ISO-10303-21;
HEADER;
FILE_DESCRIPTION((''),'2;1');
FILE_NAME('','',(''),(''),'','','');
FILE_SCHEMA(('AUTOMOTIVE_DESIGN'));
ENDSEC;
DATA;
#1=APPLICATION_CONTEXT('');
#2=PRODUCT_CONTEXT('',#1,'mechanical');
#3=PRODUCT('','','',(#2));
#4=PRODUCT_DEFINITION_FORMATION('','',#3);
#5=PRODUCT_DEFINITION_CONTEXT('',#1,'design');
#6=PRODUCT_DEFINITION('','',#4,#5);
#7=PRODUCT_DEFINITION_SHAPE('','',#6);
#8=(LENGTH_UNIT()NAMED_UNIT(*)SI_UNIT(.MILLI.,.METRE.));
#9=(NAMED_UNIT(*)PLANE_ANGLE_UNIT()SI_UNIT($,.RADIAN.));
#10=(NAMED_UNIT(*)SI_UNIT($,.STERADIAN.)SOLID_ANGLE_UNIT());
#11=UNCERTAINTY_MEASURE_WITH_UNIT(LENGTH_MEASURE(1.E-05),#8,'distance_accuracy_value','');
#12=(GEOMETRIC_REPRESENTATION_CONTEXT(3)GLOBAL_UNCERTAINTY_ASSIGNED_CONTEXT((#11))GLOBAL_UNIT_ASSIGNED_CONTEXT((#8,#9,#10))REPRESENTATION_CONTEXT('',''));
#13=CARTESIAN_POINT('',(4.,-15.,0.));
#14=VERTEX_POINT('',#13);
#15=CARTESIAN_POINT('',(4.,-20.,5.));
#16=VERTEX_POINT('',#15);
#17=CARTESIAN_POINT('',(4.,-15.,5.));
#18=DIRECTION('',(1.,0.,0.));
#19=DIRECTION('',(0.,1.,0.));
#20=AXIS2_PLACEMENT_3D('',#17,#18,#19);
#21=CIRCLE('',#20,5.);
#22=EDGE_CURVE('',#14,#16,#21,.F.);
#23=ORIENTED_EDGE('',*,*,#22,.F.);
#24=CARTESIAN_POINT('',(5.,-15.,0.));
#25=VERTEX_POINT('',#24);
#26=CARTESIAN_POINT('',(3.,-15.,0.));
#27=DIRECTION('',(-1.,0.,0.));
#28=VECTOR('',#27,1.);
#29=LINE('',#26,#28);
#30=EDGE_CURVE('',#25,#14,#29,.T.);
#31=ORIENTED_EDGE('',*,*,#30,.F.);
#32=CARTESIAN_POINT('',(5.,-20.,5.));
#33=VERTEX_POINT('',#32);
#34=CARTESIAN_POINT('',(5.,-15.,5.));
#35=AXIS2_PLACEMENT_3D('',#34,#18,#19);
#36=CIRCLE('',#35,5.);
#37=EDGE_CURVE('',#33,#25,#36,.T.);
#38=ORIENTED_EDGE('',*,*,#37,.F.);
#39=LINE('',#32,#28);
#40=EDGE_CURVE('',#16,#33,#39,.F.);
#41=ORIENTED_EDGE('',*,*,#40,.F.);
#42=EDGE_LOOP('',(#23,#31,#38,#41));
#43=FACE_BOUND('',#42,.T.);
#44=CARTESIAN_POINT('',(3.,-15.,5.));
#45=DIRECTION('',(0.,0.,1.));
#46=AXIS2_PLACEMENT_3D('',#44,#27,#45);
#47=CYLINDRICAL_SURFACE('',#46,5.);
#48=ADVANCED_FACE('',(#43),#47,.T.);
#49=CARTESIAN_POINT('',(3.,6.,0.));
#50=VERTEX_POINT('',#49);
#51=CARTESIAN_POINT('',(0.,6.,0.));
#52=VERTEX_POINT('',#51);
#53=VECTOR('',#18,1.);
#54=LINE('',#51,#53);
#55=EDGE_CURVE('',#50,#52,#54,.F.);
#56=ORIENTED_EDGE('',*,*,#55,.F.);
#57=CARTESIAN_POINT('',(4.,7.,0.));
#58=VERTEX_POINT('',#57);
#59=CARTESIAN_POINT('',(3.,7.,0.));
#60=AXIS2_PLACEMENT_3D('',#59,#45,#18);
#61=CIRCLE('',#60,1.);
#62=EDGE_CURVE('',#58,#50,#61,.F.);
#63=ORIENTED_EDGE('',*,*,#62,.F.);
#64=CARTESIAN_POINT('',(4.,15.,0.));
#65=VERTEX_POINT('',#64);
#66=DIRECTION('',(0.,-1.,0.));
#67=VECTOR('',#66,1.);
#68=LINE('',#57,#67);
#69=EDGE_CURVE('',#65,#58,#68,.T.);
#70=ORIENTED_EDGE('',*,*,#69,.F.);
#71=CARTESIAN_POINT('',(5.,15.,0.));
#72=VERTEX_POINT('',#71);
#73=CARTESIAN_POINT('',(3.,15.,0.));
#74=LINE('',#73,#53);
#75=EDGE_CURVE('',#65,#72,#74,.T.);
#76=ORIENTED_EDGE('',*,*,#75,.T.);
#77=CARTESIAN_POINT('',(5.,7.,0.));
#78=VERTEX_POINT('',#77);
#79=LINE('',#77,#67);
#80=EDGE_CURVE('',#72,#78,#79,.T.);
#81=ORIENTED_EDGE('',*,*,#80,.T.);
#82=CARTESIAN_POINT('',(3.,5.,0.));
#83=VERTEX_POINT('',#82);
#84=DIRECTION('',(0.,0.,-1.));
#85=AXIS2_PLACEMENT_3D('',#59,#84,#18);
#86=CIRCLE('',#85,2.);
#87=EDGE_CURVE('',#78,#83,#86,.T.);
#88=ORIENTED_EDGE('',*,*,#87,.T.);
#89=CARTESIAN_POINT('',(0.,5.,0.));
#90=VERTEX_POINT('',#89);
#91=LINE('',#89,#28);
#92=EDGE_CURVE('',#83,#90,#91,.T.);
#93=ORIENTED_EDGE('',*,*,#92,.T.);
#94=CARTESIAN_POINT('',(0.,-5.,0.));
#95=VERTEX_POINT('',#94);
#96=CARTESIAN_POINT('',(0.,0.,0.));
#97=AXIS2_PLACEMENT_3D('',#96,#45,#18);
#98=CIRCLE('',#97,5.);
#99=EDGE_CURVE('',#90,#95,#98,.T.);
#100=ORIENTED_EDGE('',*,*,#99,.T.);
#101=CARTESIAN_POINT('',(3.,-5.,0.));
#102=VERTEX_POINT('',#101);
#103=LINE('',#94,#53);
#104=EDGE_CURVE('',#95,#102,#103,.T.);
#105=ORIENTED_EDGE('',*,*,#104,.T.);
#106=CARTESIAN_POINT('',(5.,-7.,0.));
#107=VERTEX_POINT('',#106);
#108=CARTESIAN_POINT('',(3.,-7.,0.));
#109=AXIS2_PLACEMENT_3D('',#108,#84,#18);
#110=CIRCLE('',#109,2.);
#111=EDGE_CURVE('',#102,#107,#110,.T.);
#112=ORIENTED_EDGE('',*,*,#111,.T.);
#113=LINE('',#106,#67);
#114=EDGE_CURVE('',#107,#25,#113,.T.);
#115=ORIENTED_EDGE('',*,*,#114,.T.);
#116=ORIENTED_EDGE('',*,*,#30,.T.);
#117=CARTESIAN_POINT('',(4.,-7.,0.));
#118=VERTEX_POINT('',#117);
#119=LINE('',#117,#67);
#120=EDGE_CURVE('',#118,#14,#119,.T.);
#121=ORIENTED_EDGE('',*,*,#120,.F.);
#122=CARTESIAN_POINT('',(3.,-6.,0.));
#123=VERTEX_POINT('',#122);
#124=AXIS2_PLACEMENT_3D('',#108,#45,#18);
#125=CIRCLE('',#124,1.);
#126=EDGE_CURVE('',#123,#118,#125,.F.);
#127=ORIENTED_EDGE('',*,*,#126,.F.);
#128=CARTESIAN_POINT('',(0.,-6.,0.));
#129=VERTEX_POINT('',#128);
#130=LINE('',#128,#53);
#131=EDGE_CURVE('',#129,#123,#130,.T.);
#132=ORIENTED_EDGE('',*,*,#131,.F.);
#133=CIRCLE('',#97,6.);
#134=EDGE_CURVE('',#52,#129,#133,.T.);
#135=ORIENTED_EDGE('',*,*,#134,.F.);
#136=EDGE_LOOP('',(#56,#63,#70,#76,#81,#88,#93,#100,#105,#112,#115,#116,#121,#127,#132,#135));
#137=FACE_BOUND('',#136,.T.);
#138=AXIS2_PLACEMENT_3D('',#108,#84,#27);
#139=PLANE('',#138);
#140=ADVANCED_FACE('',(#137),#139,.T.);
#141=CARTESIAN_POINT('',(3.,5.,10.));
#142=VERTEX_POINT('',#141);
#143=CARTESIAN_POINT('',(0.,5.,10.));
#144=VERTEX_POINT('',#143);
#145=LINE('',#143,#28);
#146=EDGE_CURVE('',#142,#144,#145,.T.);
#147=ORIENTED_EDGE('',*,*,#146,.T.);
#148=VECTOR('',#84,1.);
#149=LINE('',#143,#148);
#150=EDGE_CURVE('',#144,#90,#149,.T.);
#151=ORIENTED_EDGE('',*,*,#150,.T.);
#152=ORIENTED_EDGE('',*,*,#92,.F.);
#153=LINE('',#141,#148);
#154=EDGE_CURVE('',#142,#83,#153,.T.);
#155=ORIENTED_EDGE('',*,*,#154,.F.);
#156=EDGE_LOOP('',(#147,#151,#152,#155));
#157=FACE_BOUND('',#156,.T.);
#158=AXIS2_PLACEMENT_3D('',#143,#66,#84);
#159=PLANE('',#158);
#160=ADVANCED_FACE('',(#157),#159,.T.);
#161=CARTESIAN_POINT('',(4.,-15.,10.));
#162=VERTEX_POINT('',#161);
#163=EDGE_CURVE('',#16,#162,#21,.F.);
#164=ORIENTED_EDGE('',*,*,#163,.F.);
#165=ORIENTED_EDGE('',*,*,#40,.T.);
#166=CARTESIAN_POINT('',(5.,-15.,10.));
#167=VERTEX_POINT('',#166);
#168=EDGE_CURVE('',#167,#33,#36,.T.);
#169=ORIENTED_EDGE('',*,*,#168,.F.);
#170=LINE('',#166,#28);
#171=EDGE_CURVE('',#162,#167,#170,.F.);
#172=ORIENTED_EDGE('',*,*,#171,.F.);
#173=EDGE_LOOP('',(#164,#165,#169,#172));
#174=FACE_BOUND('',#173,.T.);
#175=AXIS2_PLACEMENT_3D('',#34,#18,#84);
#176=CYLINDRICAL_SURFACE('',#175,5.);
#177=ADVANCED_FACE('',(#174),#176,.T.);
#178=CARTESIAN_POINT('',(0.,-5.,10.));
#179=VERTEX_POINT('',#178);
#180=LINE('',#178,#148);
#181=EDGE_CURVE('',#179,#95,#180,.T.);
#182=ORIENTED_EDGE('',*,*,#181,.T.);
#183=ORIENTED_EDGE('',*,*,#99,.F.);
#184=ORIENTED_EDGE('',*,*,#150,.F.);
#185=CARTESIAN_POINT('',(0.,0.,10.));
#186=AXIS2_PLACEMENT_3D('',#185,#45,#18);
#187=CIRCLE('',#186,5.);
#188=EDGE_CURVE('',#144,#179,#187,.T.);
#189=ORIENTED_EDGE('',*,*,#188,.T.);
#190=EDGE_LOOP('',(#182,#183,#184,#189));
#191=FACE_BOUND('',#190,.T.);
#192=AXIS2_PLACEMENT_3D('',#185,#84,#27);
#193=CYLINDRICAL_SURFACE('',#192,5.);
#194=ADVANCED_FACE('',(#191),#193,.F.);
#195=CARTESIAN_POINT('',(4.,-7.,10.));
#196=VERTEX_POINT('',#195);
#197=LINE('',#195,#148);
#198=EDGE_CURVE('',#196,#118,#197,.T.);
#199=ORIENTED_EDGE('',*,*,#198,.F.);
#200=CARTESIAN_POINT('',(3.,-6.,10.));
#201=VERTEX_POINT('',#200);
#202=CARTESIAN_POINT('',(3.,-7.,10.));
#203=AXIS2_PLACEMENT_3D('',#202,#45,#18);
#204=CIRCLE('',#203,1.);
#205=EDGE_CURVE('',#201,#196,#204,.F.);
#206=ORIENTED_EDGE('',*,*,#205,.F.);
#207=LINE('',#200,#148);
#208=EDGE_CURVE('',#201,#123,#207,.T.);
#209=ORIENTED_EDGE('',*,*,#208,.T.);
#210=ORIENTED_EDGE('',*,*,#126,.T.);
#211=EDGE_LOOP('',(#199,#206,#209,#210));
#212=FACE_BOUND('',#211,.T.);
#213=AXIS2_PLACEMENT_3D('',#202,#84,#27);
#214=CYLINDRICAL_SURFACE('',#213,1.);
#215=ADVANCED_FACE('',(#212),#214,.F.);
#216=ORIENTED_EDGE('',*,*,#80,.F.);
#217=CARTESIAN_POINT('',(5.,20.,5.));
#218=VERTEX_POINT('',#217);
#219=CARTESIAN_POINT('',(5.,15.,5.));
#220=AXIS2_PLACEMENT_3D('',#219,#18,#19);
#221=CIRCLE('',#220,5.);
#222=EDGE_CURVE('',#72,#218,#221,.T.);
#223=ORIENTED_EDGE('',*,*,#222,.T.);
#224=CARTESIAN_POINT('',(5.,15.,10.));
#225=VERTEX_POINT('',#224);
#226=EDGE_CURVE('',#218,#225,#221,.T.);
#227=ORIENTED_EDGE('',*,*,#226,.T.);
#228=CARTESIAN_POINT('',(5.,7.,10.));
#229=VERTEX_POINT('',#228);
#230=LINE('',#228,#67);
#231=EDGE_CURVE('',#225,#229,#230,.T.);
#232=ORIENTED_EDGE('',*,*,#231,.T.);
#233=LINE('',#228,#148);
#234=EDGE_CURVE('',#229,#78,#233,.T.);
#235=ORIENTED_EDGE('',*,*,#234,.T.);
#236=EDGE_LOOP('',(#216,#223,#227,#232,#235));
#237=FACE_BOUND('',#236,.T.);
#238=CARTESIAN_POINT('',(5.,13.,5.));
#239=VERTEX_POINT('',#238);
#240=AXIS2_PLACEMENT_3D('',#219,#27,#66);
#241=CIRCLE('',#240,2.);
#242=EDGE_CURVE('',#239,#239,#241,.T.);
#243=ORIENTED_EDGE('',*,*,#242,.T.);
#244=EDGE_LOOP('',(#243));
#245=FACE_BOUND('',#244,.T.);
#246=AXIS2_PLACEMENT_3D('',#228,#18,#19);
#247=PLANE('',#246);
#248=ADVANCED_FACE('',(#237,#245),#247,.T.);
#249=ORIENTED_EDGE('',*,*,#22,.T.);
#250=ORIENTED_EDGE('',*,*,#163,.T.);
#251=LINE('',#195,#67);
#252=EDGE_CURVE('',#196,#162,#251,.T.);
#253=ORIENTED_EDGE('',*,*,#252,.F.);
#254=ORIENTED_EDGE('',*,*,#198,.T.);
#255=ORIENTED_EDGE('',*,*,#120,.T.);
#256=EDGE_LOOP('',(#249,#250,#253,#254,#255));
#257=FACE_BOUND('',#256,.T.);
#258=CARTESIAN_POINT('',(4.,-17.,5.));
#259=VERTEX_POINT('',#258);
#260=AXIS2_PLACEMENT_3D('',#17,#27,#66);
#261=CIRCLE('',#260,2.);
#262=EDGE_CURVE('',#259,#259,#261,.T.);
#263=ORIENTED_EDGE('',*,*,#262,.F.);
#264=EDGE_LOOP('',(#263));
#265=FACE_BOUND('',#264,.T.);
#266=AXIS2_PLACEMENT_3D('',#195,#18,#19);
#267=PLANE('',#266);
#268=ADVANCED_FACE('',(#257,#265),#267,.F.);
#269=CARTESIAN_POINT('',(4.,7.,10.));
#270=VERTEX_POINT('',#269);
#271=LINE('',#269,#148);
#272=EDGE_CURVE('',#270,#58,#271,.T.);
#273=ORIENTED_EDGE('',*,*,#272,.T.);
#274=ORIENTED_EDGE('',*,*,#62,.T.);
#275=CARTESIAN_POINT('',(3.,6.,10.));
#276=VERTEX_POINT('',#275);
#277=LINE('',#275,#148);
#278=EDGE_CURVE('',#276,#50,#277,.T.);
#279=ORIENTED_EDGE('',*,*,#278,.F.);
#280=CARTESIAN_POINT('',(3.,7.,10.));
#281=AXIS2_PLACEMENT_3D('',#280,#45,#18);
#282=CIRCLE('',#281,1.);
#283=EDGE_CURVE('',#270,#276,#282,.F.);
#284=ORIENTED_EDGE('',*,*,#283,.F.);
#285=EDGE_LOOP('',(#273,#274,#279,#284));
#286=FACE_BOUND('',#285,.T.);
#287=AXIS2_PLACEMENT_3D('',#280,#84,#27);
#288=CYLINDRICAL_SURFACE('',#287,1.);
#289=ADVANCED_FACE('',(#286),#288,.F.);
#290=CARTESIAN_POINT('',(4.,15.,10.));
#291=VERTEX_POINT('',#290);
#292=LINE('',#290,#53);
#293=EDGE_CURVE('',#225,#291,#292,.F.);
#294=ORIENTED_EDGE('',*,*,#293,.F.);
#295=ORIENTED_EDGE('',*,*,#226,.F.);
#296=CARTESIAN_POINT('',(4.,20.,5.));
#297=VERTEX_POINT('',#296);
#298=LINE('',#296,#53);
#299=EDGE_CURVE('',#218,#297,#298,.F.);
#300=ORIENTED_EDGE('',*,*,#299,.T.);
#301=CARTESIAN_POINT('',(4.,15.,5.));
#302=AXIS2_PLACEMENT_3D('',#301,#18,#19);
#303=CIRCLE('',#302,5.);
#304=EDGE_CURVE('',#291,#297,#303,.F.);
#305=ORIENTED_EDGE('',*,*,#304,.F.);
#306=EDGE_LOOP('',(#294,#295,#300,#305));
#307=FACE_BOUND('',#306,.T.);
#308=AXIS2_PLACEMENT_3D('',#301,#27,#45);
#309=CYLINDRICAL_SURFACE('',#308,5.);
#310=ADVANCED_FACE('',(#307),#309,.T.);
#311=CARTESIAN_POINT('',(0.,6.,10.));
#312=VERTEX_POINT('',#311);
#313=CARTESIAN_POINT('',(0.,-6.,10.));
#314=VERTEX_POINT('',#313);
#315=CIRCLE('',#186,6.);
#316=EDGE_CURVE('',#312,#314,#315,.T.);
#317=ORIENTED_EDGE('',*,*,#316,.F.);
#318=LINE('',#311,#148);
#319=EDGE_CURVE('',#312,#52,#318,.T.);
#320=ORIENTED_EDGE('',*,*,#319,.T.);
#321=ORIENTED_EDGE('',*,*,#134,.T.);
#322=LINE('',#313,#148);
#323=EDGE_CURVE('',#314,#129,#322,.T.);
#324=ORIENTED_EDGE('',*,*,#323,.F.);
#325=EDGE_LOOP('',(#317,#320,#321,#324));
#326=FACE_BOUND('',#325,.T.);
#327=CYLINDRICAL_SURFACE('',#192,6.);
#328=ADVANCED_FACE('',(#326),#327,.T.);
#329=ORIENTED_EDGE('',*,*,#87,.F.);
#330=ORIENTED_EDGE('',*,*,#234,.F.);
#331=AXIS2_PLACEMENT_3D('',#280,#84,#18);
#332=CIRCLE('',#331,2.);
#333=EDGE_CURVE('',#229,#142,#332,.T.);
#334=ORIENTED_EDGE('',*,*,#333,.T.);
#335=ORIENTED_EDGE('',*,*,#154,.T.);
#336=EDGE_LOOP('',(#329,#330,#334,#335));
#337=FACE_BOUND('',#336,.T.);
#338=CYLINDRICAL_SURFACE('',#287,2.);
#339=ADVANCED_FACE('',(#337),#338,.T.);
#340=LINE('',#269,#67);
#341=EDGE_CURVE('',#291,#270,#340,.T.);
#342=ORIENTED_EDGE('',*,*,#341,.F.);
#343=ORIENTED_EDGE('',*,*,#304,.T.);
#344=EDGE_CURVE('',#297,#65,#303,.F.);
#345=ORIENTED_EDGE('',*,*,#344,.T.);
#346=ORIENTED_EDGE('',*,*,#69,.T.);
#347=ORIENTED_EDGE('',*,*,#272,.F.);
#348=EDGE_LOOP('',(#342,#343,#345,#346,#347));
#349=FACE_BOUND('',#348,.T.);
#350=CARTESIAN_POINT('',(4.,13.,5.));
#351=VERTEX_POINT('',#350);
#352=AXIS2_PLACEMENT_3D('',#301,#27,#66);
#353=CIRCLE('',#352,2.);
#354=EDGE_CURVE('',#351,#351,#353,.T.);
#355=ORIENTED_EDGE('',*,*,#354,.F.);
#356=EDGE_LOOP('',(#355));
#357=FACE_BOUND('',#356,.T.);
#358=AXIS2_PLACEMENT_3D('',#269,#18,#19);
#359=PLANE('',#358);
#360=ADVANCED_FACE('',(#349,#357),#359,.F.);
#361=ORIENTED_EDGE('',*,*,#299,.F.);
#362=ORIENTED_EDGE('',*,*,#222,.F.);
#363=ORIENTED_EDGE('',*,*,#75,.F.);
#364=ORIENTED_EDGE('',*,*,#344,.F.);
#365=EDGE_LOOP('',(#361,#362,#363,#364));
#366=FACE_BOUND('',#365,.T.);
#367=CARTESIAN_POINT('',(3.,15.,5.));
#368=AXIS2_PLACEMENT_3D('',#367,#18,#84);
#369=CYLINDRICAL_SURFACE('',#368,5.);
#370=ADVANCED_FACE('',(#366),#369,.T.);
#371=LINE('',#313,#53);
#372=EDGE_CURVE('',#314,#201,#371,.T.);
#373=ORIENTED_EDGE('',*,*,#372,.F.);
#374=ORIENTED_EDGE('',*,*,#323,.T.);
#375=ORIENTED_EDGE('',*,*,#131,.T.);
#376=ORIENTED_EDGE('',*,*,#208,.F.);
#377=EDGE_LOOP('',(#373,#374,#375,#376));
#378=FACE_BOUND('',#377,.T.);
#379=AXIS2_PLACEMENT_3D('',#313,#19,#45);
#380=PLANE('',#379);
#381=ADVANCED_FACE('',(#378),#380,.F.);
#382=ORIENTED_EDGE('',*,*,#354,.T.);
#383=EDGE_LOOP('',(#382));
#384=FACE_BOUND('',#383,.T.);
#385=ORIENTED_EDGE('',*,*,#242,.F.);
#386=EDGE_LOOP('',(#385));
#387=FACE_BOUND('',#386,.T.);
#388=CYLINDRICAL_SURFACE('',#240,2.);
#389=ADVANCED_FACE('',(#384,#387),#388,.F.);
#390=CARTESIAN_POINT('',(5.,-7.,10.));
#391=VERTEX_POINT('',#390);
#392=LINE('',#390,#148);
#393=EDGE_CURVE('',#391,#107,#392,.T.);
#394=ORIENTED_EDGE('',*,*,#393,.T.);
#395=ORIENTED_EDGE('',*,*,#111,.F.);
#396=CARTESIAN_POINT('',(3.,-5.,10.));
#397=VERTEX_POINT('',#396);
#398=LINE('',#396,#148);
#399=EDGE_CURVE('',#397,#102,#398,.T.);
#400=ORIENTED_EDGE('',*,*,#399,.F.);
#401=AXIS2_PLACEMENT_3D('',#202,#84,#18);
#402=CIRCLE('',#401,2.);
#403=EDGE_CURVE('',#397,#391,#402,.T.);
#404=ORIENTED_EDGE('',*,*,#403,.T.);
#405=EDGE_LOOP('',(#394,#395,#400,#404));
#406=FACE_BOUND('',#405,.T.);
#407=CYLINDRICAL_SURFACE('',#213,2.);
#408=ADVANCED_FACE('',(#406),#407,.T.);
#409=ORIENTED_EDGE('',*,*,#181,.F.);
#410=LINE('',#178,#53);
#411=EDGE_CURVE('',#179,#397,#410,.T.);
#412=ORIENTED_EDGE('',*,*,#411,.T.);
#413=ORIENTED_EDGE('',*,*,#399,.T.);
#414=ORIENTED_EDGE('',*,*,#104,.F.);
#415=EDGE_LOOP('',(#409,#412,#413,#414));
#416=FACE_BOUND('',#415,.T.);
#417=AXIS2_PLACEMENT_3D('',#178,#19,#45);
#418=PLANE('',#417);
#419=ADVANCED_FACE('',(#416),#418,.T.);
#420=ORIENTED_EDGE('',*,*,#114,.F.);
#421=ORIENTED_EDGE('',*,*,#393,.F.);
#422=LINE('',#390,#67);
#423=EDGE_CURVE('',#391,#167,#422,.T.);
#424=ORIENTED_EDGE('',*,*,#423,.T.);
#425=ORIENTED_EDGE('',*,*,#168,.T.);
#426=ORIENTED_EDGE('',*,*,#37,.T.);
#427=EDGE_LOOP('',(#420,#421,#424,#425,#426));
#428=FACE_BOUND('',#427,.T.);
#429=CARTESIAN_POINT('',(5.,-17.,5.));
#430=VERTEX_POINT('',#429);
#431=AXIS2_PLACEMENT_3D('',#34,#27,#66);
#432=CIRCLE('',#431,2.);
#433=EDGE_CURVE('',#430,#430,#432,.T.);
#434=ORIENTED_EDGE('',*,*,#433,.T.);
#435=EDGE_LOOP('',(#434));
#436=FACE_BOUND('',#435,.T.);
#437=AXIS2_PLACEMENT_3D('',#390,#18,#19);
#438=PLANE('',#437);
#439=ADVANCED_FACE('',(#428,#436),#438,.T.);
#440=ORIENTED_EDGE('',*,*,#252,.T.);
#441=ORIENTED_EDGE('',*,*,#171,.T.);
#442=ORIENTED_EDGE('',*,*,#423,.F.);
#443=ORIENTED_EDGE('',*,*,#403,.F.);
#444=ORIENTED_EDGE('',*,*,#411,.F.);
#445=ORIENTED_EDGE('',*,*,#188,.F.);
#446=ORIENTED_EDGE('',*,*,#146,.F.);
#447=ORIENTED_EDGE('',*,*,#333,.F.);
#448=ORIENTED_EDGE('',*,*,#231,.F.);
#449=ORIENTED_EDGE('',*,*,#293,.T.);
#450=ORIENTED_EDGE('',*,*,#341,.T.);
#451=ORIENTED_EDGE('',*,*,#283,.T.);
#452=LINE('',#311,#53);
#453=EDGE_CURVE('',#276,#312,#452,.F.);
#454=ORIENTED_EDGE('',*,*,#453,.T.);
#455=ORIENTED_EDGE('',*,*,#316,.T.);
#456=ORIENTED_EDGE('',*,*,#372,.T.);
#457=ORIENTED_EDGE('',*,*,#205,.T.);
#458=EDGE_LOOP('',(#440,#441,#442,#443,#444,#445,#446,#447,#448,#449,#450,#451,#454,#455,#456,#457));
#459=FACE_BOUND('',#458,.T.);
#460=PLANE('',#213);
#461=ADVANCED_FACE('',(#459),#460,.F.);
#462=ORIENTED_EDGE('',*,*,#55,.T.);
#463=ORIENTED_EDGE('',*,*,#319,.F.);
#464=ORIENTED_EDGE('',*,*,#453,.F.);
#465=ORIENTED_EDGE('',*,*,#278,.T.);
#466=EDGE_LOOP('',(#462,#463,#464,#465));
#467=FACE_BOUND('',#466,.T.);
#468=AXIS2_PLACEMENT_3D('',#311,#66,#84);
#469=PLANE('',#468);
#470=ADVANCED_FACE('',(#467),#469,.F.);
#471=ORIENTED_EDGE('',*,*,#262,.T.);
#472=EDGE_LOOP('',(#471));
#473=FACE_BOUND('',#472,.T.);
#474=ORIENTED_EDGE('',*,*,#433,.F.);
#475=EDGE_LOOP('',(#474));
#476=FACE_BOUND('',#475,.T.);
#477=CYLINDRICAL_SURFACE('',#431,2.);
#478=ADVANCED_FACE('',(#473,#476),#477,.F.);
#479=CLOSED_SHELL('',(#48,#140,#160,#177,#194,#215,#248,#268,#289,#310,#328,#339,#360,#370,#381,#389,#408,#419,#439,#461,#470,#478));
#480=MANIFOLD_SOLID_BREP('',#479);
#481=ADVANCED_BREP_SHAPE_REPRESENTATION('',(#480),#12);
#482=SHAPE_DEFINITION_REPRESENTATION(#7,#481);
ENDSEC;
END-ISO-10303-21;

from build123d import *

# Parameters (mm, degrees)
EXTRUDE_1_DEPTH     = 10
FILLET_1_R          = 5
SKETCH_2_R          = 2
CUT_EXTRUDE_1_DEPTH = 25.494897428


with BuildPart() as part:
    # 草图1 → 拉伸-薄壁1 (new body)
    with BuildSketch(Plane.XY):
        with BuildLine():
            Line((5, 20), (5, 7))
            ThreePointArc((5, 7), (4.414213562, 5.585786438), (3, 5))
            Line((3, 5), (0, 5))
            ThreePointArc((0, 5), (-5, 0), (0, -5))
            Line((0, -5), (3, -5))
            ThreePointArc((3, -5), (4.414213562, -5.585786438), (5, -7))
            Line((5, -7), (5, -20))
            Line((5, -20), (4, -20))
            Line((4, -20), (4, -7))
            ThreePointArc((4, -7), (3.707106781, -6.292893219), (3, -6))
            Line((3, -6), (0, -6))
            ThreePointArc((0, -6), (-6, 0), (0, 6))
            Line((0, 6), (3, 6))
            ThreePointArc((3, 6), (3.707106781, 6.292893219), (4, 7))
            Line((4, 7), (4, 20))
            Line((4, 20), (5, 20))
        make_face()
    extrude(amount=EXTRUDE_1_DEPTH)

    # 圆角1
    fillet_1_edges = [part.edges().sort_by_distance(p)[0] for p in [
        (4.5, 20, 10),
        (4.5, 20, 0),
        (4.5, -20, 10),
        (4.5, -20, 0),
    ]]
    fillet(fillet_1_edges, radius=FILLET_1_R - 0.0001)  # a hair under: the kernel refuses the full size

    # 草图2 → 切除-拉伸1 (cut, through all)
    with BuildSketch(Plane.ZY.offset(-4)):
        with Locations(Location((5, -15, 0), (0, 0, 270))):
            Circle(SKETCH_2_R)
        with Locations(Location((5, 15, 0), (0, 0, 270))):
            Circle(SKETCH_2_R)
    extrude(amount=-CUT_EXTRUDE_1_DEPTH, mode=Mode.SUBTRACT)


solid = part.part
